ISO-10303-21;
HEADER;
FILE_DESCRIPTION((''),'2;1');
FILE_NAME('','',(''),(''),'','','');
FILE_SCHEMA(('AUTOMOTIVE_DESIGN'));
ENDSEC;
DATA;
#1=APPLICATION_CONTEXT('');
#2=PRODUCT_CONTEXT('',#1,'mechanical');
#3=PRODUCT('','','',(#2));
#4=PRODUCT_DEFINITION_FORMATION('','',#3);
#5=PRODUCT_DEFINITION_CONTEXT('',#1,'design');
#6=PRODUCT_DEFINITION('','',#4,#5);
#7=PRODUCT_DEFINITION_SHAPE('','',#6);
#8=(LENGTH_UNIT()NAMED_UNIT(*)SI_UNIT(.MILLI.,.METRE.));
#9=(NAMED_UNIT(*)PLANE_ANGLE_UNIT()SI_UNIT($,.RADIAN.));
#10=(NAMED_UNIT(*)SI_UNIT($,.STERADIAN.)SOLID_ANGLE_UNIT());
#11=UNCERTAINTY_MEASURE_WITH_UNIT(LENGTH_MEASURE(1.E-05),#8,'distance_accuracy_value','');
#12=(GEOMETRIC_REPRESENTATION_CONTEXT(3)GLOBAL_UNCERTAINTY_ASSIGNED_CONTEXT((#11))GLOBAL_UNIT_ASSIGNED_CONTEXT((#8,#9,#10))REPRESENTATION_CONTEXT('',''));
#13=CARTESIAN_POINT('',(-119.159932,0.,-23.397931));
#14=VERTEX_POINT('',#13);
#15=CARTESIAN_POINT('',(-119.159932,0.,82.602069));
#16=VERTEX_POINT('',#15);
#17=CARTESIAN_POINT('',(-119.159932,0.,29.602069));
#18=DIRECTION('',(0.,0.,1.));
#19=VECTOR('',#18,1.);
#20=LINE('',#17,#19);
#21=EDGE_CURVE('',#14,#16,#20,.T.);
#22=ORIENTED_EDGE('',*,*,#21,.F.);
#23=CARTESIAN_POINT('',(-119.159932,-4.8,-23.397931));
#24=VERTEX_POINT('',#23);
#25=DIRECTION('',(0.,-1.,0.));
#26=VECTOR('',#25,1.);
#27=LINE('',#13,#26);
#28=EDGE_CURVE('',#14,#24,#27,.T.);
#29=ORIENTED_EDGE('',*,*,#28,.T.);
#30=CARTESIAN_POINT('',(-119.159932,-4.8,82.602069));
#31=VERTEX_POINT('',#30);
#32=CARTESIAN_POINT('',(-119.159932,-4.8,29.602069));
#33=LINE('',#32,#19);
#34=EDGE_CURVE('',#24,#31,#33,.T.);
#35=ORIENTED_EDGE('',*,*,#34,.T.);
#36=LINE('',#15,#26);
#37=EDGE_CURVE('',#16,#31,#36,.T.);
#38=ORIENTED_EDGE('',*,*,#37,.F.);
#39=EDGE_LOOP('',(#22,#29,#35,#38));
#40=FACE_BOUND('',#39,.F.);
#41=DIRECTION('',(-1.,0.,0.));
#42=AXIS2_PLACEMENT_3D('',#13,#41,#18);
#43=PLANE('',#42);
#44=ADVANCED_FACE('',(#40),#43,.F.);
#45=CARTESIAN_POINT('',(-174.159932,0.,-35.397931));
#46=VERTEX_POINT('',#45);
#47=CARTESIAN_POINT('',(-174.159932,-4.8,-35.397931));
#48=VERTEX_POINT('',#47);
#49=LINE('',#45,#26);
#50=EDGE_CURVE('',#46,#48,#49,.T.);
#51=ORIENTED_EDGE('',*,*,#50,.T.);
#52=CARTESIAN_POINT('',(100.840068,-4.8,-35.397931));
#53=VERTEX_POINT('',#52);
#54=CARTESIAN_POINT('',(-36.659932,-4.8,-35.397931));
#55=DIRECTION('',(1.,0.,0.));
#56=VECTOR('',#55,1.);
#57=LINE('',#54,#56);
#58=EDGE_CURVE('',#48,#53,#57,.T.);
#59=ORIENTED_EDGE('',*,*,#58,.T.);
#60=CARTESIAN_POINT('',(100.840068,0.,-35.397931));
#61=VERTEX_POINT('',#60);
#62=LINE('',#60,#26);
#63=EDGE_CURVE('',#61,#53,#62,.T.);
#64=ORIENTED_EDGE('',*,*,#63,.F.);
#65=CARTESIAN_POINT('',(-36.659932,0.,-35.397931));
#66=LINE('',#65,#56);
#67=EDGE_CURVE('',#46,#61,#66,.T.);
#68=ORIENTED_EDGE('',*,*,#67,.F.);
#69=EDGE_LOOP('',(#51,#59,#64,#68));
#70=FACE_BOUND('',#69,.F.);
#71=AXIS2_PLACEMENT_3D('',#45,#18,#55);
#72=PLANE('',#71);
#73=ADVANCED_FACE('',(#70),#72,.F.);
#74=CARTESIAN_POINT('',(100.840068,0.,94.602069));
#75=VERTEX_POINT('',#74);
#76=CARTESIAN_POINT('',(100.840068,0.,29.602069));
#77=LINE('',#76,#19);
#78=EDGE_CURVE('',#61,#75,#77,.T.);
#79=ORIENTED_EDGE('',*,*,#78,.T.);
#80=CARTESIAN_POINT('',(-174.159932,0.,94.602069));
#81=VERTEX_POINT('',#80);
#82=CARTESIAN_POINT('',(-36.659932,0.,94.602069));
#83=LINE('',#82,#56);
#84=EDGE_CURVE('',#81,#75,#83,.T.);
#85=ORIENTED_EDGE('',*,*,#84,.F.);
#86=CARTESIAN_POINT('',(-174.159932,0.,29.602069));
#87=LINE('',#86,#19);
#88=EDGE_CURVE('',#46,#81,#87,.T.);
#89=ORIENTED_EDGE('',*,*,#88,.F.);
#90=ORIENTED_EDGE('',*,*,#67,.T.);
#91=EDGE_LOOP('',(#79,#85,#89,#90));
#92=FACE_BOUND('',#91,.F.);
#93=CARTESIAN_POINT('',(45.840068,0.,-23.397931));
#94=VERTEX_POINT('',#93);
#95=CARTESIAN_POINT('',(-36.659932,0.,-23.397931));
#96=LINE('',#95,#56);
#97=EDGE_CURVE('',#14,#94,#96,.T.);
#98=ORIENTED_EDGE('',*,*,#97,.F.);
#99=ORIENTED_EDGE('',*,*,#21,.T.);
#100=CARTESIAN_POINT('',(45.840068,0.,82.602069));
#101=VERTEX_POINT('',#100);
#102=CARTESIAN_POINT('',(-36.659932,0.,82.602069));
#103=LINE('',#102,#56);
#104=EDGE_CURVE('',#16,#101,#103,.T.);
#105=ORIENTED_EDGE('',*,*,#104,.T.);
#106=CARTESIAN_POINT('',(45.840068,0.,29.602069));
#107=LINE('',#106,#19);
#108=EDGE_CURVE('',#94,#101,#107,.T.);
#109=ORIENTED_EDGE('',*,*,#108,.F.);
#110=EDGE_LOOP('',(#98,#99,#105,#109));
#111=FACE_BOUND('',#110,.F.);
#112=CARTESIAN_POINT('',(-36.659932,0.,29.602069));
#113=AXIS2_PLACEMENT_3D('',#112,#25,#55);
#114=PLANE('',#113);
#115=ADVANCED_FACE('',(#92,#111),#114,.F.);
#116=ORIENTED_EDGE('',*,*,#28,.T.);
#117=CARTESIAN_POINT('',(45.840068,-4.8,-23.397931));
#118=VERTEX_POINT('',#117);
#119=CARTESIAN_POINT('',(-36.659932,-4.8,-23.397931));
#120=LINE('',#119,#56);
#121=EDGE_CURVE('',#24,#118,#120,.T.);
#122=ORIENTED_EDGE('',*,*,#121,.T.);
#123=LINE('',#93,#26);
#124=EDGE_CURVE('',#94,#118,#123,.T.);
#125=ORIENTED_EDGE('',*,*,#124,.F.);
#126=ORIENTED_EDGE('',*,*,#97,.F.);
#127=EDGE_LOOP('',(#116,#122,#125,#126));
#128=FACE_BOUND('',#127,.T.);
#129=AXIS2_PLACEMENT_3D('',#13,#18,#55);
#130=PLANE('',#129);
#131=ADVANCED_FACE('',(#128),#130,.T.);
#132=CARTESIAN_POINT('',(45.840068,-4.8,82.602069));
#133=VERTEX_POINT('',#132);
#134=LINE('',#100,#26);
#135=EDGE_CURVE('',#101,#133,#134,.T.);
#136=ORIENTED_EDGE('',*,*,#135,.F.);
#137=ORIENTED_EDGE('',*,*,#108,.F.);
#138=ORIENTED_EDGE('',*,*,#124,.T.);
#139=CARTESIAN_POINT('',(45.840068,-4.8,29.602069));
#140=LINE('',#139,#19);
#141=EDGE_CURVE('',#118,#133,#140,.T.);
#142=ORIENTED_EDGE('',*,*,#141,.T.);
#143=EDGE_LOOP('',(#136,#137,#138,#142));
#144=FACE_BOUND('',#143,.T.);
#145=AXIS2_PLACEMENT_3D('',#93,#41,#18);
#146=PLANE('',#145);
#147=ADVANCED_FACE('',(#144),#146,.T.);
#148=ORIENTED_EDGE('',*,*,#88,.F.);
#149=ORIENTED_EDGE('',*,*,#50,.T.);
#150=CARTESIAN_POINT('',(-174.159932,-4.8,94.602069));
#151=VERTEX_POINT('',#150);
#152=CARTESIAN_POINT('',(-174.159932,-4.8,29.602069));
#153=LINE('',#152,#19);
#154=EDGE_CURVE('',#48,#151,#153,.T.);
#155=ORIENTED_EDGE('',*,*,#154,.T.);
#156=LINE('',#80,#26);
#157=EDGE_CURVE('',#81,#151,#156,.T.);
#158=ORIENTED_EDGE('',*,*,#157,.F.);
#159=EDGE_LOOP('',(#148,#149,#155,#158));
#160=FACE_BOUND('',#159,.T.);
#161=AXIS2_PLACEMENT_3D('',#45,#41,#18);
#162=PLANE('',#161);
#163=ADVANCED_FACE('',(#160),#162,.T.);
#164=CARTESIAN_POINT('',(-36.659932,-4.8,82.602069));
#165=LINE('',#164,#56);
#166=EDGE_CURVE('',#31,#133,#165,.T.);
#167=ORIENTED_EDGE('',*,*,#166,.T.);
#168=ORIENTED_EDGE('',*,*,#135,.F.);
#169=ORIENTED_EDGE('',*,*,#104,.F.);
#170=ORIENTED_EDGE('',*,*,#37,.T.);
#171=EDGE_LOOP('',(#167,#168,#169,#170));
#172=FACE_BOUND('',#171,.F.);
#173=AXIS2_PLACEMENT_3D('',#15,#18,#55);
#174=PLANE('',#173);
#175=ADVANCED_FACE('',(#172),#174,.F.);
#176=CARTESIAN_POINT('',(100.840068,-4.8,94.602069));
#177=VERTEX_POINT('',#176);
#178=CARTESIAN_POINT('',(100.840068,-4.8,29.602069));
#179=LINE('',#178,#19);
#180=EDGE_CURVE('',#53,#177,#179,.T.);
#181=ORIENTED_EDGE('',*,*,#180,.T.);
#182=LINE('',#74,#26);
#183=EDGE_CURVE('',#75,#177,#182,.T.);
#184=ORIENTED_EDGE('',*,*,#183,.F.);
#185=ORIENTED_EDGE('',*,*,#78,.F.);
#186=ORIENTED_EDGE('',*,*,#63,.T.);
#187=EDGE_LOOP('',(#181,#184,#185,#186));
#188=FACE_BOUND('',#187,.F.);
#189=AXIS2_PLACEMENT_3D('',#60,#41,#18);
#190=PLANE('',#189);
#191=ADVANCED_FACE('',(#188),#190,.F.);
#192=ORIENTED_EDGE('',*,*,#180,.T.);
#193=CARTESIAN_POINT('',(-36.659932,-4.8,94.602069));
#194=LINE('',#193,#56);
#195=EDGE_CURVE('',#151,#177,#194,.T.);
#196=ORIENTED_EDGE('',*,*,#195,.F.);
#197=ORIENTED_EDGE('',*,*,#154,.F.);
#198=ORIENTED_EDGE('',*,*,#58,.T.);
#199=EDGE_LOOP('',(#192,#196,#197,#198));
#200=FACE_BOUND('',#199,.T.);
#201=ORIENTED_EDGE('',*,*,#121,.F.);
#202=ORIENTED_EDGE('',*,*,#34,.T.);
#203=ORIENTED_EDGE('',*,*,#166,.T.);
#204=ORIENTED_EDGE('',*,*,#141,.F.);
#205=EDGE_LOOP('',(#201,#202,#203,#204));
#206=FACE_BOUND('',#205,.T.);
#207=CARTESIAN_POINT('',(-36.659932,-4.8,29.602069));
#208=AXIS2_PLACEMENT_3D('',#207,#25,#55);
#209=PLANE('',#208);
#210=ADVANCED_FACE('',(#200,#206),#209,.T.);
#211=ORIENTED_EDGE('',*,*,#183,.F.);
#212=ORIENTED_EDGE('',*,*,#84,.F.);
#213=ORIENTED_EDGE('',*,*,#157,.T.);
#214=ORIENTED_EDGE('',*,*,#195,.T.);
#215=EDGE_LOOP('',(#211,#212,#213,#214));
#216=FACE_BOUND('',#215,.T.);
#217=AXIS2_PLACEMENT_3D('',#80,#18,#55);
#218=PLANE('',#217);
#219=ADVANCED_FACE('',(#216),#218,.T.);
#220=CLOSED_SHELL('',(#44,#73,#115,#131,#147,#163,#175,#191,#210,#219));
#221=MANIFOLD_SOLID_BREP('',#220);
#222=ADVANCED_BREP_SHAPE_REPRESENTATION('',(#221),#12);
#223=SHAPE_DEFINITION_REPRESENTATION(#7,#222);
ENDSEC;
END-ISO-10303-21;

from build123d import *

# Parameters (mm, degrees)
F0_W     = 275
F0_H     = 130
F0_W_2   = 165
F0_H_2   = 106
F1_DEPTH = 4.8


# Not quite as in the source:
# - a feature names something its author has since deleted; it is built from what else it names


with BuildPart() as f1:
    # F0 (on Front) → F1 (new body)
    with BuildSketch(Plane.XZ):
        with Locations((-36.6599317901, 29.6020694077)):
            Rectangle(F0_W, F0_H)
        with Locations((-36.6599317901, 29.6020694077)):
            Rectangle(F0_W_2, F0_H_2, mode=Mode.SUBTRACT)
    extrude(amount=F1_DEPTH)


solid = f1.part
